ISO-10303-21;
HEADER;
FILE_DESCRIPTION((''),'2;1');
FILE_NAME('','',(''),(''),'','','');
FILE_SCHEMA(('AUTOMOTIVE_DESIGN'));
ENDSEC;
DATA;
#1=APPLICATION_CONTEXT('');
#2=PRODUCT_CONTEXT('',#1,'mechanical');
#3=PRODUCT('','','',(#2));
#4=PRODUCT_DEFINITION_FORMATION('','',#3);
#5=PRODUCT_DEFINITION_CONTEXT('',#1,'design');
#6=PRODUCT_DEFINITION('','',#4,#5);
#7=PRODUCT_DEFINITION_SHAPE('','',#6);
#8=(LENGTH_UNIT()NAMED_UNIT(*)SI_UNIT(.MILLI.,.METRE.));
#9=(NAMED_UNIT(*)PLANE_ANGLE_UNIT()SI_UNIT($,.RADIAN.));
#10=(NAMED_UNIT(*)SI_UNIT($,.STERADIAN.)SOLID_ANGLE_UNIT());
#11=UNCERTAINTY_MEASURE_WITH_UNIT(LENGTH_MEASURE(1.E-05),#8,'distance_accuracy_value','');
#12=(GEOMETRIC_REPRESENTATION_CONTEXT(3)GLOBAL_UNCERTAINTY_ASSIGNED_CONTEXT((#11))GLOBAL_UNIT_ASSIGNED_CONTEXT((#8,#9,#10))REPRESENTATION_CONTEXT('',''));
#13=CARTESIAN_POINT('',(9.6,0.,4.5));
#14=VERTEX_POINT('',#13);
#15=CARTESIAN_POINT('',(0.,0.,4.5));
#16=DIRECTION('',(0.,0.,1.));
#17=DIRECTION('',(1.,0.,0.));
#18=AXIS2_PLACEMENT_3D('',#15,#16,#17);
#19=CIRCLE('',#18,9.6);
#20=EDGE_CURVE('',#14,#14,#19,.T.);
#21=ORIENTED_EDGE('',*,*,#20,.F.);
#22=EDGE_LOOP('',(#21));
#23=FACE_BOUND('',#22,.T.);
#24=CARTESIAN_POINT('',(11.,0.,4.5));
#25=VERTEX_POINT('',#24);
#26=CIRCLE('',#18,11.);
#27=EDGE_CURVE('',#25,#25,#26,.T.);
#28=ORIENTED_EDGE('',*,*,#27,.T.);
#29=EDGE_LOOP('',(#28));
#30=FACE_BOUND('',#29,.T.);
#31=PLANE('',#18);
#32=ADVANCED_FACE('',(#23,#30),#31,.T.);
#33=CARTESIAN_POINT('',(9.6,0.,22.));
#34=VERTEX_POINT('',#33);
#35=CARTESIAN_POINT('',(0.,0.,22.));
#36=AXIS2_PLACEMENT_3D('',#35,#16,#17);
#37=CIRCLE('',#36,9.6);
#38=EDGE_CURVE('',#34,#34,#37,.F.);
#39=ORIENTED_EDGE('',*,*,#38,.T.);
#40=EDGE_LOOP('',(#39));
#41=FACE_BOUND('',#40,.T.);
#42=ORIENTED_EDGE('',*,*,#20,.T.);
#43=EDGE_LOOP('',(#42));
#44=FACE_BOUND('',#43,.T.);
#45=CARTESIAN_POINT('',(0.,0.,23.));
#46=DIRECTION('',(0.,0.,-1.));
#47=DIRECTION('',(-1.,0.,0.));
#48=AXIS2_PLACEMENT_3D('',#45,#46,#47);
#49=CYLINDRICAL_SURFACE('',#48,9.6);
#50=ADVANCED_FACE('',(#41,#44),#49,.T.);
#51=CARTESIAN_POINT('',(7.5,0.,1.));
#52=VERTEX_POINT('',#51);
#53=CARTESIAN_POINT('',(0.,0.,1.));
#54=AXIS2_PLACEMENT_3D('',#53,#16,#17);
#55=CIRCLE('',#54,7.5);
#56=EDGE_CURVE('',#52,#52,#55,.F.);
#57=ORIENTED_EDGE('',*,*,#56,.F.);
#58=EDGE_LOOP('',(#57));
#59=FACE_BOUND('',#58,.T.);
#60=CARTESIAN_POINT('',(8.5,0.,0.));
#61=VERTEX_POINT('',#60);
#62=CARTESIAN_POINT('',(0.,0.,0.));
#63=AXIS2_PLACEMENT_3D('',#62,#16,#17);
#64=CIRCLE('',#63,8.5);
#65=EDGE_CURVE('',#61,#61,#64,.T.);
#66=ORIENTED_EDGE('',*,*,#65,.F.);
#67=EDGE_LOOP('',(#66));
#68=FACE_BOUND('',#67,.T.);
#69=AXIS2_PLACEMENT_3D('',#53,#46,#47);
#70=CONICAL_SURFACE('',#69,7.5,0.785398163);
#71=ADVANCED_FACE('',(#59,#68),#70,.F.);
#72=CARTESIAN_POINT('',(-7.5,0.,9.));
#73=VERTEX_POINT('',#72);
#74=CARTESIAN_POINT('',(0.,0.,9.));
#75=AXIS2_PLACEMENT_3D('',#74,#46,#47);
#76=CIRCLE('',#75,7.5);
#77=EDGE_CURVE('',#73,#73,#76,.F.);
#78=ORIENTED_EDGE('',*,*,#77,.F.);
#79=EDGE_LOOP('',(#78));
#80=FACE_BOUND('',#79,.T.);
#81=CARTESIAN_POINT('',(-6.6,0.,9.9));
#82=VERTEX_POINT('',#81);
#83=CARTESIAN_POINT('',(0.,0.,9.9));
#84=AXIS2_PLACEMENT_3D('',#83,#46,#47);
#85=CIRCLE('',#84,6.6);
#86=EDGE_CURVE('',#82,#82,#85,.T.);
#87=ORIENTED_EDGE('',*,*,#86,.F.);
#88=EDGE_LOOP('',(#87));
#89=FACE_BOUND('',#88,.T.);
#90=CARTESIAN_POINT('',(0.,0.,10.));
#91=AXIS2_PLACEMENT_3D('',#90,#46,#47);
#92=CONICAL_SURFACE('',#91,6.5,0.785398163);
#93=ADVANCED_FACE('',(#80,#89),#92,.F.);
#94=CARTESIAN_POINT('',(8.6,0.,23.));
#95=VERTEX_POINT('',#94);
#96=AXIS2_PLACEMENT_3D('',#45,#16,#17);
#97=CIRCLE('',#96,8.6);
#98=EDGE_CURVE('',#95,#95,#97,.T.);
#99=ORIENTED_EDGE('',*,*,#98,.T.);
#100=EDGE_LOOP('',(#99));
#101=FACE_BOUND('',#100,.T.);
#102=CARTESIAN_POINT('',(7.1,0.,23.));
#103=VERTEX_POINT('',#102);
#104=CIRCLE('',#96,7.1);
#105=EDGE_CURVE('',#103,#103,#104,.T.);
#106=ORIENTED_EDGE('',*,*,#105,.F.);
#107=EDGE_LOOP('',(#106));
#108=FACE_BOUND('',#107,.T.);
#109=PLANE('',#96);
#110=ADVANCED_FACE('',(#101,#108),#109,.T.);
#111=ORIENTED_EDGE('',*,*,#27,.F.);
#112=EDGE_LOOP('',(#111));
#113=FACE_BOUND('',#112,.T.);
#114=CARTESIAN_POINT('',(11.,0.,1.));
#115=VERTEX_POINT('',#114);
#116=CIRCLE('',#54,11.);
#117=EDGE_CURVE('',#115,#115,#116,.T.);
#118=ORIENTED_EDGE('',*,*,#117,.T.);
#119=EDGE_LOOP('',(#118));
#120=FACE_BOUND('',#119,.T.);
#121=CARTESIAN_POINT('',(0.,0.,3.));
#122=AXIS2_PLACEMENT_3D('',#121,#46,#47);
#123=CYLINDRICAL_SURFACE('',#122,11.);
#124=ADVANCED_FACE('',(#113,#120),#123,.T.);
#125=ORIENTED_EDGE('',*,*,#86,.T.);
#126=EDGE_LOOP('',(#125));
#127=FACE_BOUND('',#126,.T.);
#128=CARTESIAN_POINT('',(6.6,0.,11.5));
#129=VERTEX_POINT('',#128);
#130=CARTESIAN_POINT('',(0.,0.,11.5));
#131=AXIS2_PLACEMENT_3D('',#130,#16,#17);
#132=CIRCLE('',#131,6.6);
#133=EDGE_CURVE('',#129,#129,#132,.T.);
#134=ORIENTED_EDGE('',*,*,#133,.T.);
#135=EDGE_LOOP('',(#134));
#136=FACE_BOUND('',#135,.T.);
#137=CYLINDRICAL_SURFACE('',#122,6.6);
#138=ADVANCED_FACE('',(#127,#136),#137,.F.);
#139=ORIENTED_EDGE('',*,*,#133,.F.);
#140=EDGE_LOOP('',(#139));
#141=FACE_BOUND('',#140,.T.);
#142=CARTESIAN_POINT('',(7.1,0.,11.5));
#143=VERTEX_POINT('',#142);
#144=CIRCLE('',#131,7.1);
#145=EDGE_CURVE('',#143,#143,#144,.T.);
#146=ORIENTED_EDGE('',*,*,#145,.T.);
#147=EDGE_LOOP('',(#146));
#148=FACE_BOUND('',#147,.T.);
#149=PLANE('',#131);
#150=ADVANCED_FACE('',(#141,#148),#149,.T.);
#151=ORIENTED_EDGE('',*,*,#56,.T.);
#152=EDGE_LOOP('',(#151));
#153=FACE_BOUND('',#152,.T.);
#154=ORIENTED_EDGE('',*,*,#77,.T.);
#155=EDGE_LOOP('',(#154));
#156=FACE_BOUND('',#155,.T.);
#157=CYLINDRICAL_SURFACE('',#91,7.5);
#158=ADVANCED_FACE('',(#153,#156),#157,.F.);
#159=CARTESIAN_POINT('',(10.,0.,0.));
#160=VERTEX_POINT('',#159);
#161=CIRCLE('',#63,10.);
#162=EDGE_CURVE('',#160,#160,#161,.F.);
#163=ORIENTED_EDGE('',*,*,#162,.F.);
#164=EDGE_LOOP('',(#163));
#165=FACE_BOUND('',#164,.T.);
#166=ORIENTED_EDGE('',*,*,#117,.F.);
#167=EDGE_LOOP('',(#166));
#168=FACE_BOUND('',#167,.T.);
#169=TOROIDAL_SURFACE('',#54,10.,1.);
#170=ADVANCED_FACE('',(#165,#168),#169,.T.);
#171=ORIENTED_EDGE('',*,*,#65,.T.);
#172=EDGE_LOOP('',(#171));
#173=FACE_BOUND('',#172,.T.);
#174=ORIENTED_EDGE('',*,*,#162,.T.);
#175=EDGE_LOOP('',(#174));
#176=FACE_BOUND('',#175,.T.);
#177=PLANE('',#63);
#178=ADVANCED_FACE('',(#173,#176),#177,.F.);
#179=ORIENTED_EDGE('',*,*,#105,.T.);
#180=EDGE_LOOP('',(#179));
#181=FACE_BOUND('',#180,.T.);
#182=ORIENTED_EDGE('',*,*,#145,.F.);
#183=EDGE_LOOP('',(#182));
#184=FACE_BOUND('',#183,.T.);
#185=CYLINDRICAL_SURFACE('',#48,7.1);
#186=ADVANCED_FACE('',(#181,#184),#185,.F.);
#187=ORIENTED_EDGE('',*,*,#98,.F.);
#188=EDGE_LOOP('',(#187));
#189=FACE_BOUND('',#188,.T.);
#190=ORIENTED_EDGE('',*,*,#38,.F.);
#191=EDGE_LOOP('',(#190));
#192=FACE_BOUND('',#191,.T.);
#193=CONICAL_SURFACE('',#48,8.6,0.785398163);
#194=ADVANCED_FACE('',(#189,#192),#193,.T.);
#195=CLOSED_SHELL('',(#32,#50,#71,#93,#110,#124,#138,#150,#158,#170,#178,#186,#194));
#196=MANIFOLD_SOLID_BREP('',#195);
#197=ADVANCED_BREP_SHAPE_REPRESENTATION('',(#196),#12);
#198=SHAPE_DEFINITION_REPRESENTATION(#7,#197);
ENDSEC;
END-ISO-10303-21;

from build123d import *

# Parameters (mm, degrees)
SKETCH_1_R          = 11
SKETCH_1_R_2        = 6.6
EXTRUDE_1_DEPTH     = 3
SKETCH_2_R          = 9.6
SKETCH_2_R_2        = 7.1
EXTRUDE_2_DEPTH     = 20
CHAMFER_1_SIZE      = 1
FILLET_1_R          = 1
SKETCH_3_R          = 11
SKETCH_3_R_2        = 9.6
EXTRUDE_3_DEPTH     = 1.5
SKETCH_4_R          = 7.1
SKETCH_4_R_2        = 6.6
EXTRUDE_4_DEPTH     = 8.5
SKETCH_5_R          = 7.5
CUT_EXTRUDE_1_DEPTH = 10
CHAMFER_2_SIZE      = 1


with BuildPart() as part:
    # 스케치1 → 보스-돌출1 (new body)
    with BuildSketch(Plane.XY):
        Circle(SKETCH_1_R)
        Circle(SKETCH_1_R_2, mode=Mode.SUBTRACT)
    extrude(amount=EXTRUDE_1_DEPTH)

    # 스케치2 → 보스-돌출2 (add)
    with BuildSketch(Plane.XY.offset(3)):
        Circle(SKETCH_2_R)
        Circle(SKETCH_2_R_2, mode=Mode.SUBTRACT)
    extrude(amount=EXTRUDE_2_DEPTH)

    # 모따기1
    chamfer_1_edges = [part.edges().sort_by_distance(p)[0] for p in [
        (-9.6, 0, 23),
    ]]
    chamfer(chamfer_1_edges, length=CHAMFER_1_SIZE)

    # 필렛1
    fillet_1_edges = [part.edges().sort_by_distance(p)[0] for p in [
        (-11, 0, 0),
    ]]
    fillet(fillet_1_edges, radius=FILLET_1_R)

    # 스케치3 → 보스-돌출3 (add)
    with BuildSketch(Plane.XY.offset(3)):
        Circle(SKETCH_3_R)
        Circle(SKETCH_3_R_2, mode=Mode.SUBTRACT)
    extrude(amount=EXTRUDE_3_DEPTH)

    # 스케치4 → 보스-돌출4 (add)
    with BuildSketch(Plane.XY.offset(3)):
        Circle(SKETCH_4_R)
        Circle(SKETCH_4_R_2, mode=Mode.SUBTRACT)
    extrude(amount=EXTRUDE_4_DEPTH)

    # 스케치5 → 컷-돌출1 (cut)
    with BuildSketch(Plane(origin=(0, 0, 0), x_dir=(-1, 0, 0), z_dir=(0, 0, -1))):
        Circle(SKETCH_5_R)
    extrude(amount=-CUT_EXTRUDE_1_DEPTH, mode=Mode.SUBTRACT)

    # 모따기2
    # the kernel refuses this chamfer: 1 mm, written as the material it adds along each edge
    with BuildSketch(Plane(origin=(0, 0, 10), x_dir=(-1, 0, 0), z_dir=(0, -1, 0))) as chamfer_2_piece_1_section:
        Polygon((7.5, CHAMFER_2_SIZE), (7.5 - CHAMFER_2_SIZE, 0), (7.5, 0), align=None)
    chamfer_2_piece_1 = revolve(axis=Axis((0, 0, 10), (0, 0, -1)), mode=Mode.PRIVATE)
    chamfer_2_piece_1 = chamfer_2_piece_1 - Plane(origin=(0, 0, 9.456358799), x_dir=(1, 0, 0), z_dir=(0, 0, -1)) * Cylinder(6.6, 30, mode=Mode.PRIVATE)
    add(chamfer_2_piece_1)
    # the kernel refuses this chamfer: 1 mm, written as the material it takes off along each edge
    with BuildSketch(Plane(origin=(0, 0, 0), x_dir=(-1, 0, 0), z_dir=(0, -1, 0))) as chamfer_2_2_piece_1:
        Polygon((7.5, -CHAMFER_2_SIZE), (7.5 + CHAMFER_2_SIZE, 0), (7.5, 0), align=None)
    revolve(axis=Axis((0, 0, 0), (0, 0, -1)), mode=Mode.SUBTRACT)


solid = part.part
